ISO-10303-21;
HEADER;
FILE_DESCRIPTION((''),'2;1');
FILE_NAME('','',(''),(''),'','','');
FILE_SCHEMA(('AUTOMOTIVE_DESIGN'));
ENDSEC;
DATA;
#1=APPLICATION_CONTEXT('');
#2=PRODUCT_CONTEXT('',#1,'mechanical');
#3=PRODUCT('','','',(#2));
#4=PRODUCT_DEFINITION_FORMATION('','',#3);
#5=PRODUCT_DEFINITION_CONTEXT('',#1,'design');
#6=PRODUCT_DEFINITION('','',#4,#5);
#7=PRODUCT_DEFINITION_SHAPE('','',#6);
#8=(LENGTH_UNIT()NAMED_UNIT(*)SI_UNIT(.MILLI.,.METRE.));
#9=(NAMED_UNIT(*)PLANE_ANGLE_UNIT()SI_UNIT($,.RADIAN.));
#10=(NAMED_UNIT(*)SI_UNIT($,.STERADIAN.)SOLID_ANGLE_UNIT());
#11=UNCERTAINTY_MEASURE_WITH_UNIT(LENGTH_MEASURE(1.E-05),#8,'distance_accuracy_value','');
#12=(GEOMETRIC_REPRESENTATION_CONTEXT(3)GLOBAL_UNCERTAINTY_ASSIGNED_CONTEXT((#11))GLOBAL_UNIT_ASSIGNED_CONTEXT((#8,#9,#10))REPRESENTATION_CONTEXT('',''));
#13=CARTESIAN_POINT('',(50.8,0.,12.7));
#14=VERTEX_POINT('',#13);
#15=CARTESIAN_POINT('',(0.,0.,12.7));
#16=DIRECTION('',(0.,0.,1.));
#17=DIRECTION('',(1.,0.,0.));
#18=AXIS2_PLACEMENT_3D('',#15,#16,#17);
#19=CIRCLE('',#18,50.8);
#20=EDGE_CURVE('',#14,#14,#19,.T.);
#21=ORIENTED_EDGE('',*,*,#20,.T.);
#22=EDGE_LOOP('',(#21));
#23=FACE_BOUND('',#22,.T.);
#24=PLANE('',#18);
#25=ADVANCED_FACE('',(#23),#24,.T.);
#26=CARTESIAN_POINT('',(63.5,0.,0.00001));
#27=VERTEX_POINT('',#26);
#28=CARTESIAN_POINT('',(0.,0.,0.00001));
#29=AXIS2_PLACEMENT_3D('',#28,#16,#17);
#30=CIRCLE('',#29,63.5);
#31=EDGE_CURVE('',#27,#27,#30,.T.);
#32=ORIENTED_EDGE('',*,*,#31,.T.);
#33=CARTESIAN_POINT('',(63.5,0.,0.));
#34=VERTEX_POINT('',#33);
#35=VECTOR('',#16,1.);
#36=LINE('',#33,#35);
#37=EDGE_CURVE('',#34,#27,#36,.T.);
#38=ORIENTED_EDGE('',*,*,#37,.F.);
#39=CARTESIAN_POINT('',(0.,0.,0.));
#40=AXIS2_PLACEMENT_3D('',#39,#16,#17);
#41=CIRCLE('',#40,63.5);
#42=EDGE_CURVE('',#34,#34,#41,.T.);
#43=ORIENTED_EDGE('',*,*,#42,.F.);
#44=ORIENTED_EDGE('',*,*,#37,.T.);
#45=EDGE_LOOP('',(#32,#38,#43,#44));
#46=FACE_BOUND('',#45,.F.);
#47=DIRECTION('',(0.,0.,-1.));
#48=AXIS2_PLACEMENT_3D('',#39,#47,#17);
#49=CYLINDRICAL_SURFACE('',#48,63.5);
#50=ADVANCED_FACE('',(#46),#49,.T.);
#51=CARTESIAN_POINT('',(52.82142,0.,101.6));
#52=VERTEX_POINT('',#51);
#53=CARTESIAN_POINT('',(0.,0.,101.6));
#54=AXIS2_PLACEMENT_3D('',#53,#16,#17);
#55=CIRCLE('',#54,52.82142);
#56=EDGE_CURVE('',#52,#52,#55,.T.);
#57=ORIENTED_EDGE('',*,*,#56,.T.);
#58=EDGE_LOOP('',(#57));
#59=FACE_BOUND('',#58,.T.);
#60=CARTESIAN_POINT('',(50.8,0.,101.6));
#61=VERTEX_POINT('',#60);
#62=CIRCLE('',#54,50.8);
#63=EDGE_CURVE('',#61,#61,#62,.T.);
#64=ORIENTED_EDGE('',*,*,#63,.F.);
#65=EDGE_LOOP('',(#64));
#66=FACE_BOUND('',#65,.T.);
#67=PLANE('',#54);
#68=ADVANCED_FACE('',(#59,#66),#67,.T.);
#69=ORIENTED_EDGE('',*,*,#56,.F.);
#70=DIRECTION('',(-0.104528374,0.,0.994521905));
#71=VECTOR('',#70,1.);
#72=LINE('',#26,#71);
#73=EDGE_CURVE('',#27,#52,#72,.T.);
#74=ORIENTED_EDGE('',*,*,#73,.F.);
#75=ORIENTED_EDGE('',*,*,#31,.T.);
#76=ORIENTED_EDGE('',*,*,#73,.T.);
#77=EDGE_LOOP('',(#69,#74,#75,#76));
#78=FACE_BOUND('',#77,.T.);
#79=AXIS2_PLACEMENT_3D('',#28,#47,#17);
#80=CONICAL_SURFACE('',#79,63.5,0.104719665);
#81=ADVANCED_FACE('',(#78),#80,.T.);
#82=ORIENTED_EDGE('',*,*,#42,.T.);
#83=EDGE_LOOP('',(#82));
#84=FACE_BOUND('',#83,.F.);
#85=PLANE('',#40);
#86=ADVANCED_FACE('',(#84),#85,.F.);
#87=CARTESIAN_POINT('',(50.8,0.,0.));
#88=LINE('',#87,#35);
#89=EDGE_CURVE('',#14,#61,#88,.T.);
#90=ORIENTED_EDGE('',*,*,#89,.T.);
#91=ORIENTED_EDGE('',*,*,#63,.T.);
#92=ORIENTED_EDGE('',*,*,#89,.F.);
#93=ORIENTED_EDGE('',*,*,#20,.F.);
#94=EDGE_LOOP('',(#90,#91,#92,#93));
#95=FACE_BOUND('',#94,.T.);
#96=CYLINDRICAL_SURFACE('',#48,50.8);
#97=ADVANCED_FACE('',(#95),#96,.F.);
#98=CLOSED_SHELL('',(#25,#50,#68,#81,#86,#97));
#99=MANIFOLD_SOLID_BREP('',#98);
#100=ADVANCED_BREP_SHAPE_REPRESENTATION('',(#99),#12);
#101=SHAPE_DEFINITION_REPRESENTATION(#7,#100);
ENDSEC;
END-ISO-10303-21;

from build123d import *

# Parameters (mm, degrees)
F0_R     = 63.5
F0_R_2   = 50.8
F1_DEPTH = 101.6
F2_DEPTH = 12.7
F3_SIZE2 = 10.67858
F3_SIZE  = 101.59999


# Not quite as in the source:
# - a fillet or chamfer is up to 0.001 mm smaller than in the source, because OpenCascade refuses the exact size


with BuildPart() as f1:
    # F0 (on Top) → F1 (new body)
    with BuildSketch(Plane.XY):
        Circle(F0_R)
        Circle(F0_R_2, mode=Mode.SUBTRACT)
    extrude(amount=F1_DEPTH)

    # F0 (on Top) → F2 (join)
    with BuildSketch(Plane.XY):
        Circle(F0_R_2)
    extrude(amount=F2_DEPTH)

    # F3 (size 101.6 and 10.678590303 in the source; OpenCascade refuses exactly that, so slightly less here)
    f3_edges = [f1.edges().sort_by_distance(p)[0] for p in [
        (-63.5, 0, 101.6),
    ]]
    f3_side = f1.faces().sort_by_distance((-63.5, 0, 50.8))[0]
    chamfer(f3_edges, length=F3_SIZE, length2=F3_SIZE2, reference=f3_side)


solid = f1.part
